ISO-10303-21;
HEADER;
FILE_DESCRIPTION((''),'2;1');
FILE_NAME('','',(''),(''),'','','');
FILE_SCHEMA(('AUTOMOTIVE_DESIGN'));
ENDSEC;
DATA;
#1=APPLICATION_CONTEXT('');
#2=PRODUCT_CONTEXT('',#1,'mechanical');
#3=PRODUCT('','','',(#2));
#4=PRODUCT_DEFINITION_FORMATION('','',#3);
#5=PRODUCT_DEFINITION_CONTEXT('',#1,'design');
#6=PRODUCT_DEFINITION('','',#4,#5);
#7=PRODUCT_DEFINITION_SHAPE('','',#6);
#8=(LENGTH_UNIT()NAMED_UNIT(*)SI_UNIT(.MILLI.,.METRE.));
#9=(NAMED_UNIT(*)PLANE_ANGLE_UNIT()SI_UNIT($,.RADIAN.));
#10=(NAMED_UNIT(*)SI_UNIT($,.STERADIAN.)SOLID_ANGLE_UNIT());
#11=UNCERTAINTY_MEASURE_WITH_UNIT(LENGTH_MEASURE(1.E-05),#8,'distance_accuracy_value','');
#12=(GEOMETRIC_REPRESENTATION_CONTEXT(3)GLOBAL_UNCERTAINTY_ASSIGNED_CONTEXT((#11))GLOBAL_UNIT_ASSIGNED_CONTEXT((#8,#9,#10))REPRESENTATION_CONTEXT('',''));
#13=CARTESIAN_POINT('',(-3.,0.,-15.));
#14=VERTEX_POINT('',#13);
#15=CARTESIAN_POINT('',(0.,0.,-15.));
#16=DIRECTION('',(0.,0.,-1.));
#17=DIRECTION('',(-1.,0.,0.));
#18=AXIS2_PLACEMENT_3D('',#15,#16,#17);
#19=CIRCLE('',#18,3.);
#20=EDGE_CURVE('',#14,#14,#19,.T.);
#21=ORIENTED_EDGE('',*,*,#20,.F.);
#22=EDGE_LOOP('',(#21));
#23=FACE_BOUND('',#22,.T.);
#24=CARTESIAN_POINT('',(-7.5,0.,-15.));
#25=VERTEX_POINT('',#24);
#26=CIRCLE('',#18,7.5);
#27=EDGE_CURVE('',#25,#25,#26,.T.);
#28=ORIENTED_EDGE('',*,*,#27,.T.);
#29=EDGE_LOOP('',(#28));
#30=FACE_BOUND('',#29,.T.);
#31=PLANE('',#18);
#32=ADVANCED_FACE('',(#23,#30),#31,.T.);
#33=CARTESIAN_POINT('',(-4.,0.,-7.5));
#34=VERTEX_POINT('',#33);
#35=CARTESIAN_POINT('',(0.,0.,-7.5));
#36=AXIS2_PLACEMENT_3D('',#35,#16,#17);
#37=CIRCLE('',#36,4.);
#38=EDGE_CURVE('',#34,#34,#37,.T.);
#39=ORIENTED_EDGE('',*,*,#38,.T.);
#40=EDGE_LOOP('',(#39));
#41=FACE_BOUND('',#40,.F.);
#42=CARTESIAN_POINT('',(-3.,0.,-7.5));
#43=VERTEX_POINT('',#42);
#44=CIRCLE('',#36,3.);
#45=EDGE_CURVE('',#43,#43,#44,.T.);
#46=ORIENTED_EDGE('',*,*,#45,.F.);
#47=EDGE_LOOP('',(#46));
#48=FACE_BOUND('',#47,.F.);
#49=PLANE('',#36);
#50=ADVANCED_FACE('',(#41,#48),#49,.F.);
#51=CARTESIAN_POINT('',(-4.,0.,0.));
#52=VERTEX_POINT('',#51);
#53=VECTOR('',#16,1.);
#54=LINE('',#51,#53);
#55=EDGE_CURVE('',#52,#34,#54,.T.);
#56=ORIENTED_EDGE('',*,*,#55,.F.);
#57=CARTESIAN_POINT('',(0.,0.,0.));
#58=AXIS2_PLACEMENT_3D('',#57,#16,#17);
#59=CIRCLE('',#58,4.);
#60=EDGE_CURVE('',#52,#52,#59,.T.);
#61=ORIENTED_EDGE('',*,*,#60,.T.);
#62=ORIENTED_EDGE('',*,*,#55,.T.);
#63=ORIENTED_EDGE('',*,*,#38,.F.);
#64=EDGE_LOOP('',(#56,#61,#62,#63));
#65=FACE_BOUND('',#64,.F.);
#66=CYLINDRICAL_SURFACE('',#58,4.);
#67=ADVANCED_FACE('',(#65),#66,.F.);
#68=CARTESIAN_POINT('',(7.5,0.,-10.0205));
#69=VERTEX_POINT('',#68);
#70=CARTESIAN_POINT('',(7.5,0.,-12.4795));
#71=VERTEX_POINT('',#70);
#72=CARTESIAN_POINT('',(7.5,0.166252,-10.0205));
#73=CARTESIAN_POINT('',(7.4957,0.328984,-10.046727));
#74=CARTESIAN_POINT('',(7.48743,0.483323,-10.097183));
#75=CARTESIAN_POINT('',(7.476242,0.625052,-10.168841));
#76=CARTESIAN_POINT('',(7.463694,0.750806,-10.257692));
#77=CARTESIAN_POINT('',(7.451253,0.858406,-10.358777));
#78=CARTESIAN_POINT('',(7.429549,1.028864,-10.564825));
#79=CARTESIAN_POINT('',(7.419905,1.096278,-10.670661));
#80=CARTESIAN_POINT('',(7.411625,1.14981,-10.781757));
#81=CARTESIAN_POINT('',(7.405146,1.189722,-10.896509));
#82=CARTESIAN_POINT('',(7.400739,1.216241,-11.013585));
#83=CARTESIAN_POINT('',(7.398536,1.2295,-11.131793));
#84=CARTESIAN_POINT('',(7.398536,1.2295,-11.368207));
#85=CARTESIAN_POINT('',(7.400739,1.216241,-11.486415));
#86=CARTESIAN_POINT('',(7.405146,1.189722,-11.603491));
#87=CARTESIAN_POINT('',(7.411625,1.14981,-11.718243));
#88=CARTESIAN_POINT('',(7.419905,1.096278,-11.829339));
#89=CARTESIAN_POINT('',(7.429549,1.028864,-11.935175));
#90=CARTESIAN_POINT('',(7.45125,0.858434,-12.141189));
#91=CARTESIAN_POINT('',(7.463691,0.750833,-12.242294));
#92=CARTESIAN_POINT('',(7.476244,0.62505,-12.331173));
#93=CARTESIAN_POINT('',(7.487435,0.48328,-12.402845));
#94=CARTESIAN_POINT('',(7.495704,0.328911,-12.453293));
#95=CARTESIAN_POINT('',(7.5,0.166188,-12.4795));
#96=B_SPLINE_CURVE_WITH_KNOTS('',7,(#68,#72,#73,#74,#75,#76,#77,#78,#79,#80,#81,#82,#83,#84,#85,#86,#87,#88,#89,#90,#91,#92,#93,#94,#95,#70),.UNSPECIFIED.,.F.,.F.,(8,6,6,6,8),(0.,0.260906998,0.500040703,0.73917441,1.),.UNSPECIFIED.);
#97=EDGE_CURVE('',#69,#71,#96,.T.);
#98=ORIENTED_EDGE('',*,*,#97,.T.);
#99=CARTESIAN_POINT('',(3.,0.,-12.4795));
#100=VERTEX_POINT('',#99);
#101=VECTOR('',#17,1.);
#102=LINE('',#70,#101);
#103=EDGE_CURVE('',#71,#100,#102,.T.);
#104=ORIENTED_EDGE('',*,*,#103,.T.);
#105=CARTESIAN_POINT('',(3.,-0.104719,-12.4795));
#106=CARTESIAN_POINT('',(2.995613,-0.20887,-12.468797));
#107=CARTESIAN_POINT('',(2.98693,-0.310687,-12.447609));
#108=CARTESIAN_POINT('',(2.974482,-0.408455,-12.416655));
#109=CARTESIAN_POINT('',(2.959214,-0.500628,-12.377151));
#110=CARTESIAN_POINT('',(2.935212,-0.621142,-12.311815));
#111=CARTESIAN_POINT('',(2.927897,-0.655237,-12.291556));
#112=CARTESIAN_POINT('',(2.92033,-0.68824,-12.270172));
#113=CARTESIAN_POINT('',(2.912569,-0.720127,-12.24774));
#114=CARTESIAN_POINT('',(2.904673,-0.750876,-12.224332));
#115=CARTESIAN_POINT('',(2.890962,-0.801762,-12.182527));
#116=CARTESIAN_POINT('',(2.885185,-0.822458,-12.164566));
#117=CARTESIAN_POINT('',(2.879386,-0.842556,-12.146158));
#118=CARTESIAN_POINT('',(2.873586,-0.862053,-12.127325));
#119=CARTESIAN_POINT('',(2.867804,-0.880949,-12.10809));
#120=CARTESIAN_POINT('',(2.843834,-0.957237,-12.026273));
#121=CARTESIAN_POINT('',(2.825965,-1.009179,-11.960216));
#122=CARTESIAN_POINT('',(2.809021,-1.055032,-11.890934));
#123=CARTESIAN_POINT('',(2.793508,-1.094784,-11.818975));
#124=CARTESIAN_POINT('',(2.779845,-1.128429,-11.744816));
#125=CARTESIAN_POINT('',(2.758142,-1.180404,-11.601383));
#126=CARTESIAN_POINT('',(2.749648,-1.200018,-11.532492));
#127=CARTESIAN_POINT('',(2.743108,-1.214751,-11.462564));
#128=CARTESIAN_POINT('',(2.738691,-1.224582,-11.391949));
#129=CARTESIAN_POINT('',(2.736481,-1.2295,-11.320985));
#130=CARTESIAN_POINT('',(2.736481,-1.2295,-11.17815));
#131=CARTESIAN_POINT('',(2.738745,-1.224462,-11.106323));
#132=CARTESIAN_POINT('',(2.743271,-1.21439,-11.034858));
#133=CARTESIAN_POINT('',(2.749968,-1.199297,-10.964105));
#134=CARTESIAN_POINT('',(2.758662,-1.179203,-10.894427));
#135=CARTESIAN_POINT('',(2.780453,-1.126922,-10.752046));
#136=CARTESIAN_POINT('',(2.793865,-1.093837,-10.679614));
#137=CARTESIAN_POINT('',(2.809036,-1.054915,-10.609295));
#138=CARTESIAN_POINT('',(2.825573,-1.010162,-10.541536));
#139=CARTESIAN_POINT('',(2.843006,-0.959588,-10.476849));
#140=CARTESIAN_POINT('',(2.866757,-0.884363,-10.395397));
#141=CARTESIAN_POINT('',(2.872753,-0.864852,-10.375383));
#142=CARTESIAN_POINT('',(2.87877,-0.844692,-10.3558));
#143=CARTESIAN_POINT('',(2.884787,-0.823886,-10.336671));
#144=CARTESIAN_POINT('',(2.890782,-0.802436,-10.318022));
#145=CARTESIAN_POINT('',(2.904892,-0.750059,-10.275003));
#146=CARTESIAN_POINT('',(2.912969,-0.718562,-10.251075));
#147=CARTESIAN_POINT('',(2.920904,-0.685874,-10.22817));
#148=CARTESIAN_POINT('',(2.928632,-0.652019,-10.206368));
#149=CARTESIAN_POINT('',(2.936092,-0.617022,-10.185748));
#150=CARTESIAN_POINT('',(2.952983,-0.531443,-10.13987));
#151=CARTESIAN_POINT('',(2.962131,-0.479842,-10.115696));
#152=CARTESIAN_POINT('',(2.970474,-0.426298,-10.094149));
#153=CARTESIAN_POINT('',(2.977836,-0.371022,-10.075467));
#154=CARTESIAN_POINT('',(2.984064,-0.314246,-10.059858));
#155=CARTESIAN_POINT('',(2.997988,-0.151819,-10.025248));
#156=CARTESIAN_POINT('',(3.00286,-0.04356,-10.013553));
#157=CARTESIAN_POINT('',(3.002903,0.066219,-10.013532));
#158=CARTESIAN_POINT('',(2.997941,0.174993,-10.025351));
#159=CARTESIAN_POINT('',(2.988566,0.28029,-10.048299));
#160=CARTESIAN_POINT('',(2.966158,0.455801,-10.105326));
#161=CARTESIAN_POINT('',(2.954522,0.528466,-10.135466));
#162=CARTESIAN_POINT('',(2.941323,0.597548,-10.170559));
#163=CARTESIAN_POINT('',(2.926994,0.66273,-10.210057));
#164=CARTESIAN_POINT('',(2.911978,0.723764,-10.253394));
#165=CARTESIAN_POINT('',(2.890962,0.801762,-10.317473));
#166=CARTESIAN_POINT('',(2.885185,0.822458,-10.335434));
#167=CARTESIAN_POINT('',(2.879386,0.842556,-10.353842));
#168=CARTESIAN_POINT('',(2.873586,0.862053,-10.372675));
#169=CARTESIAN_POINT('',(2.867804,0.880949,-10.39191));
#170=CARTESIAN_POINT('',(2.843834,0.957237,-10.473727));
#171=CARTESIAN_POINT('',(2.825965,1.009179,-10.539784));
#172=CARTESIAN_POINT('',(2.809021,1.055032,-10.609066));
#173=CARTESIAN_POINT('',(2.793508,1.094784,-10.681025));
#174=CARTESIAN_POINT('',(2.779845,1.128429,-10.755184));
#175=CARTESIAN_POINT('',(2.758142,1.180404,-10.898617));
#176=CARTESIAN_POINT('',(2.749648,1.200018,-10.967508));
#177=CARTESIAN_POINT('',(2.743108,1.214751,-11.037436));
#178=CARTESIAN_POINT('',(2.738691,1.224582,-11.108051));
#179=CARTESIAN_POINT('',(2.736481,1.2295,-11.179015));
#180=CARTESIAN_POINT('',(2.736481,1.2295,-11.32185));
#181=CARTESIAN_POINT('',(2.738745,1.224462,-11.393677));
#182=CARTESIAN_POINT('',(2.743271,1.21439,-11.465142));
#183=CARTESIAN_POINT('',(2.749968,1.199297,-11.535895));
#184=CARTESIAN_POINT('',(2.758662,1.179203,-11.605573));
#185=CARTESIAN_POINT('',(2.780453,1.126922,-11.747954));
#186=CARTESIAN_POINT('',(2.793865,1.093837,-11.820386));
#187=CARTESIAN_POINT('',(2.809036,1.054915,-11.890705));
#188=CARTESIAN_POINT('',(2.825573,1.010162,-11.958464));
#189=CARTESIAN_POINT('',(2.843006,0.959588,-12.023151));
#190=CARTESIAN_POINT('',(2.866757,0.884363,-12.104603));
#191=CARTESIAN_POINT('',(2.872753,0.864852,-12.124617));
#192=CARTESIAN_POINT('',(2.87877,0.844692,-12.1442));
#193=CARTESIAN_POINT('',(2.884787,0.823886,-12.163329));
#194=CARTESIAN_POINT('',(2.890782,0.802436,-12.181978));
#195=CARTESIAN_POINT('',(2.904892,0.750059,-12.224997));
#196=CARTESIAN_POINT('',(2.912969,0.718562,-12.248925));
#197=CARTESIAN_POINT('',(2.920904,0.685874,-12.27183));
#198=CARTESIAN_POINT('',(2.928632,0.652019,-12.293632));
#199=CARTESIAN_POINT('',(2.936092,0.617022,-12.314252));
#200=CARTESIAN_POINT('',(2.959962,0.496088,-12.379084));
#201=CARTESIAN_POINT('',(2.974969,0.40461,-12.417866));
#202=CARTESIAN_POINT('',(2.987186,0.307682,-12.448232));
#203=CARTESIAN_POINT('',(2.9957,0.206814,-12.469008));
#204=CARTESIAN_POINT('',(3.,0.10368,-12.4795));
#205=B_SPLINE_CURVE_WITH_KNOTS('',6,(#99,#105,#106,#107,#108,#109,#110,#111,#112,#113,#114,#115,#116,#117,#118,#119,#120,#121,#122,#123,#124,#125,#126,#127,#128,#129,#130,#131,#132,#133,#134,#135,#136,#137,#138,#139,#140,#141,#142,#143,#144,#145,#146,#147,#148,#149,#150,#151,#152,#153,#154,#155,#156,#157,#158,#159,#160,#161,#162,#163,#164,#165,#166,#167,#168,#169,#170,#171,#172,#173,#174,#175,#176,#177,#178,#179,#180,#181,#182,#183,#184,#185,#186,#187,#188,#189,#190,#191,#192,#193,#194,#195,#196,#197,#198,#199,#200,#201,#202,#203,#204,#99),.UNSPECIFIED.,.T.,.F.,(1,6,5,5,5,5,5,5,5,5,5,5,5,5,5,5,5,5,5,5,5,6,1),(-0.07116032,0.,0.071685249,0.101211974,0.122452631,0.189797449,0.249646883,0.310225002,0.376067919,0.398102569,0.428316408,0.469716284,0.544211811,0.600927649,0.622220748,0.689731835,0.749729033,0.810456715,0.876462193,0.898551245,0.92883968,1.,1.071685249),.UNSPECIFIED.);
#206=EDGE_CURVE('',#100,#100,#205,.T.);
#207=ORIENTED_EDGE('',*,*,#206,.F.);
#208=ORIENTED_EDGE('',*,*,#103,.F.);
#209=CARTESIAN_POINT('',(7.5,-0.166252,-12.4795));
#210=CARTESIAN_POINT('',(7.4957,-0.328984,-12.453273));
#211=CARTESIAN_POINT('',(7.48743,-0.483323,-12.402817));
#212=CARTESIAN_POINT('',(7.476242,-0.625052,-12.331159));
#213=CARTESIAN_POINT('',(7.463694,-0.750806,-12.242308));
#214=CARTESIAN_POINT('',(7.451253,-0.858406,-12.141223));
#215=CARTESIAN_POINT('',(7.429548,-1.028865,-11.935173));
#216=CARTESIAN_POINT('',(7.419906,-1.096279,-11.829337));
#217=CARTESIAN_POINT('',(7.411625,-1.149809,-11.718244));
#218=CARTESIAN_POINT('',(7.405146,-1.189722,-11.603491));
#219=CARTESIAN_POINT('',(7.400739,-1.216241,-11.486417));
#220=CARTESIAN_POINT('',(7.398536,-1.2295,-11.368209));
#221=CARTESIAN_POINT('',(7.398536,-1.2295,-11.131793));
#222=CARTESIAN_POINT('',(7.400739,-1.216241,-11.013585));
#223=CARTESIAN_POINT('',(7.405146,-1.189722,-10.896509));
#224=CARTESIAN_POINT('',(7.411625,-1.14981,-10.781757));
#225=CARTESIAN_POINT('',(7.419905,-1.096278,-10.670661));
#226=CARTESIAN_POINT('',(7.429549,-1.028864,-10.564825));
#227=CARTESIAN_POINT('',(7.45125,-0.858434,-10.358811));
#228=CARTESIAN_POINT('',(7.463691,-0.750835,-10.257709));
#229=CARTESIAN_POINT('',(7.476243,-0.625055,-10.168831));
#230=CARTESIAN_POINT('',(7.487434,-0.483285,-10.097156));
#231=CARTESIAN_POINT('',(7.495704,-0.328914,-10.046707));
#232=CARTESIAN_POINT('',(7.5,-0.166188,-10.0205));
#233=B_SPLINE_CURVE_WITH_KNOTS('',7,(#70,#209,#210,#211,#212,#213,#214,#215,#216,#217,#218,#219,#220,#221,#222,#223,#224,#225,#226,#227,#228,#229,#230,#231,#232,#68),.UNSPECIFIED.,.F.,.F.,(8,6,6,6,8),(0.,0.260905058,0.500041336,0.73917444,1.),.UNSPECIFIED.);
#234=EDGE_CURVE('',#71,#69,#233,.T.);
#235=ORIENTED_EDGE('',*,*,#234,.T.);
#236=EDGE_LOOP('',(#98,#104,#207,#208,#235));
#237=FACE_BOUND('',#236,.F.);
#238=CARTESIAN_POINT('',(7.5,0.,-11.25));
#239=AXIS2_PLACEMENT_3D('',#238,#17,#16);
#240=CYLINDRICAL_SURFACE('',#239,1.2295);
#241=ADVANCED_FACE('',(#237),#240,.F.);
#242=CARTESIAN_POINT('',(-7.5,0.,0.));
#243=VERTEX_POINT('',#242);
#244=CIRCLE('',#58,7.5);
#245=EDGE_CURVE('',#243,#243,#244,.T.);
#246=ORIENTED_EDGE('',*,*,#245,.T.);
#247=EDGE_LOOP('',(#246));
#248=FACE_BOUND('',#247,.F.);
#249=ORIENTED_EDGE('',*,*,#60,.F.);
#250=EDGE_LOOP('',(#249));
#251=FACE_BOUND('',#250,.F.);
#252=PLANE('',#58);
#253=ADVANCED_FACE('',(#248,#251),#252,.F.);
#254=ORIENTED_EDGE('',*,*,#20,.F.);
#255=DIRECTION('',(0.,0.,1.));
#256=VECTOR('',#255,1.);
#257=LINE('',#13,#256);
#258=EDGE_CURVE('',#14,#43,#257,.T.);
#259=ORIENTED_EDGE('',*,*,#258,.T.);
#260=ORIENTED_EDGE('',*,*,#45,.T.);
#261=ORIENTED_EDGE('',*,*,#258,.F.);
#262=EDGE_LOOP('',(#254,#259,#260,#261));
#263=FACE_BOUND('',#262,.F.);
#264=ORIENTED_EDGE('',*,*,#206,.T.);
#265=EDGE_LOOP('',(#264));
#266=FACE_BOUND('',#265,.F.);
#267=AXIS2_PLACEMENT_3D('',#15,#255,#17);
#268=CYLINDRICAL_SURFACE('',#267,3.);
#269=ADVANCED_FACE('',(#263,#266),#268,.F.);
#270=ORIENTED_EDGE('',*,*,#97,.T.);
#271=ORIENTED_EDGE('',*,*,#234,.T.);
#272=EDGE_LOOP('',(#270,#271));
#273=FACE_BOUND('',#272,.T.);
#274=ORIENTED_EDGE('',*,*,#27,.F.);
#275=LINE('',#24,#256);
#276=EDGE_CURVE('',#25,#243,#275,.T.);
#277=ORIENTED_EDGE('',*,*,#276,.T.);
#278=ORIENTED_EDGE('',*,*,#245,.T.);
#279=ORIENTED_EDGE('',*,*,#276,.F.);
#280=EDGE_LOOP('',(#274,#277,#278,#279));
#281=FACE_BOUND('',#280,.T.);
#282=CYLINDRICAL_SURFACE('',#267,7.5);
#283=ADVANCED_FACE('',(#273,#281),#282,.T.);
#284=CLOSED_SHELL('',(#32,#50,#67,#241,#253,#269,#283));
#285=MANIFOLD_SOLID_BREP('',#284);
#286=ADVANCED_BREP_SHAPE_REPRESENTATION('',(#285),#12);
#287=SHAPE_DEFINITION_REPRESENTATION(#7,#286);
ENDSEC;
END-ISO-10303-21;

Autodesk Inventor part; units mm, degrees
ref_plane "XZ Plane" through (0, 0, 0) normal (0, 1, 0) x (-1, 0, 0)
ref_plane "XY Plane" through (0, 0, 0) normal (0, 0, 1) x (1, 0, 0)
sketch "Skizze1" plane through (0, 0, 0) normal (0, 1, 0) x (-1, 0, 0)
  line L0 (4, 0) -> (4, -7.5)
  line L1 (4, -7.5) -> (3, -7.5)
  line L2 (7.5, -15) -> (7.5, 0)
  line L3 (7.5, 0) -> (4, 0)
  line L4 (0, 3.7992) -> (0, -25.1489)
  line L5 (7.5, -15) -> (3, -15)
  line L6 (3, -15) -> (3, -10)
  line L7 (3, -10) -> (3, -10)
  line L8 (3, -10) -> (3, -7.5)
  point P0 (0, 0)
  dimension "d6" = 4
  dimension "d9" = 4.5
  dimension "d10" = 5
  dimension "d15" = 6
  dimension "d16" = 15
  dimension "d17" = 7.5
  dimension "d18" = 15
revolve "Umdrehung1" add sketch "Skizze1" angle 360 about axis through (0, 0, 3.7992) along (0, 0, -1)
thread "Gewinde1" size "M6x1" class "6H" standard "ANSI Metric M Profile" full length
thread "Gewinde2" size "M8x1.25" class "6H" standard "ANSI Metric M Profile" full length
ref_plane "Arbeitsebene1" through (7.5, 0, 0) normal (1, 0, 0) x (0, 1, 0)
sketch "Skizze3" plane through (7.5, 0, 0) normal (1, 0, 0) x (0, 1, 0)
  line L0 (-4, -7.5) -> (4, -7.5) projected
  line L1 (-7.5, -15) -> (7.5, -15) projected
  line L2 (0, 0) -> (0, -15)
  line L3 (-3, -15) -> (3, -15) projected
  point P0 (0, -11.25)
  dimension "d20" = 3.75
hole "Bohrung1" at (7.5, 0, -11.25) direction (-1, 0, 0) diameter 2.459 end up to surface thread size "M3x0.5" class "6H" standard "ISO Metric profile"
properties part number "Glasdeckel"
